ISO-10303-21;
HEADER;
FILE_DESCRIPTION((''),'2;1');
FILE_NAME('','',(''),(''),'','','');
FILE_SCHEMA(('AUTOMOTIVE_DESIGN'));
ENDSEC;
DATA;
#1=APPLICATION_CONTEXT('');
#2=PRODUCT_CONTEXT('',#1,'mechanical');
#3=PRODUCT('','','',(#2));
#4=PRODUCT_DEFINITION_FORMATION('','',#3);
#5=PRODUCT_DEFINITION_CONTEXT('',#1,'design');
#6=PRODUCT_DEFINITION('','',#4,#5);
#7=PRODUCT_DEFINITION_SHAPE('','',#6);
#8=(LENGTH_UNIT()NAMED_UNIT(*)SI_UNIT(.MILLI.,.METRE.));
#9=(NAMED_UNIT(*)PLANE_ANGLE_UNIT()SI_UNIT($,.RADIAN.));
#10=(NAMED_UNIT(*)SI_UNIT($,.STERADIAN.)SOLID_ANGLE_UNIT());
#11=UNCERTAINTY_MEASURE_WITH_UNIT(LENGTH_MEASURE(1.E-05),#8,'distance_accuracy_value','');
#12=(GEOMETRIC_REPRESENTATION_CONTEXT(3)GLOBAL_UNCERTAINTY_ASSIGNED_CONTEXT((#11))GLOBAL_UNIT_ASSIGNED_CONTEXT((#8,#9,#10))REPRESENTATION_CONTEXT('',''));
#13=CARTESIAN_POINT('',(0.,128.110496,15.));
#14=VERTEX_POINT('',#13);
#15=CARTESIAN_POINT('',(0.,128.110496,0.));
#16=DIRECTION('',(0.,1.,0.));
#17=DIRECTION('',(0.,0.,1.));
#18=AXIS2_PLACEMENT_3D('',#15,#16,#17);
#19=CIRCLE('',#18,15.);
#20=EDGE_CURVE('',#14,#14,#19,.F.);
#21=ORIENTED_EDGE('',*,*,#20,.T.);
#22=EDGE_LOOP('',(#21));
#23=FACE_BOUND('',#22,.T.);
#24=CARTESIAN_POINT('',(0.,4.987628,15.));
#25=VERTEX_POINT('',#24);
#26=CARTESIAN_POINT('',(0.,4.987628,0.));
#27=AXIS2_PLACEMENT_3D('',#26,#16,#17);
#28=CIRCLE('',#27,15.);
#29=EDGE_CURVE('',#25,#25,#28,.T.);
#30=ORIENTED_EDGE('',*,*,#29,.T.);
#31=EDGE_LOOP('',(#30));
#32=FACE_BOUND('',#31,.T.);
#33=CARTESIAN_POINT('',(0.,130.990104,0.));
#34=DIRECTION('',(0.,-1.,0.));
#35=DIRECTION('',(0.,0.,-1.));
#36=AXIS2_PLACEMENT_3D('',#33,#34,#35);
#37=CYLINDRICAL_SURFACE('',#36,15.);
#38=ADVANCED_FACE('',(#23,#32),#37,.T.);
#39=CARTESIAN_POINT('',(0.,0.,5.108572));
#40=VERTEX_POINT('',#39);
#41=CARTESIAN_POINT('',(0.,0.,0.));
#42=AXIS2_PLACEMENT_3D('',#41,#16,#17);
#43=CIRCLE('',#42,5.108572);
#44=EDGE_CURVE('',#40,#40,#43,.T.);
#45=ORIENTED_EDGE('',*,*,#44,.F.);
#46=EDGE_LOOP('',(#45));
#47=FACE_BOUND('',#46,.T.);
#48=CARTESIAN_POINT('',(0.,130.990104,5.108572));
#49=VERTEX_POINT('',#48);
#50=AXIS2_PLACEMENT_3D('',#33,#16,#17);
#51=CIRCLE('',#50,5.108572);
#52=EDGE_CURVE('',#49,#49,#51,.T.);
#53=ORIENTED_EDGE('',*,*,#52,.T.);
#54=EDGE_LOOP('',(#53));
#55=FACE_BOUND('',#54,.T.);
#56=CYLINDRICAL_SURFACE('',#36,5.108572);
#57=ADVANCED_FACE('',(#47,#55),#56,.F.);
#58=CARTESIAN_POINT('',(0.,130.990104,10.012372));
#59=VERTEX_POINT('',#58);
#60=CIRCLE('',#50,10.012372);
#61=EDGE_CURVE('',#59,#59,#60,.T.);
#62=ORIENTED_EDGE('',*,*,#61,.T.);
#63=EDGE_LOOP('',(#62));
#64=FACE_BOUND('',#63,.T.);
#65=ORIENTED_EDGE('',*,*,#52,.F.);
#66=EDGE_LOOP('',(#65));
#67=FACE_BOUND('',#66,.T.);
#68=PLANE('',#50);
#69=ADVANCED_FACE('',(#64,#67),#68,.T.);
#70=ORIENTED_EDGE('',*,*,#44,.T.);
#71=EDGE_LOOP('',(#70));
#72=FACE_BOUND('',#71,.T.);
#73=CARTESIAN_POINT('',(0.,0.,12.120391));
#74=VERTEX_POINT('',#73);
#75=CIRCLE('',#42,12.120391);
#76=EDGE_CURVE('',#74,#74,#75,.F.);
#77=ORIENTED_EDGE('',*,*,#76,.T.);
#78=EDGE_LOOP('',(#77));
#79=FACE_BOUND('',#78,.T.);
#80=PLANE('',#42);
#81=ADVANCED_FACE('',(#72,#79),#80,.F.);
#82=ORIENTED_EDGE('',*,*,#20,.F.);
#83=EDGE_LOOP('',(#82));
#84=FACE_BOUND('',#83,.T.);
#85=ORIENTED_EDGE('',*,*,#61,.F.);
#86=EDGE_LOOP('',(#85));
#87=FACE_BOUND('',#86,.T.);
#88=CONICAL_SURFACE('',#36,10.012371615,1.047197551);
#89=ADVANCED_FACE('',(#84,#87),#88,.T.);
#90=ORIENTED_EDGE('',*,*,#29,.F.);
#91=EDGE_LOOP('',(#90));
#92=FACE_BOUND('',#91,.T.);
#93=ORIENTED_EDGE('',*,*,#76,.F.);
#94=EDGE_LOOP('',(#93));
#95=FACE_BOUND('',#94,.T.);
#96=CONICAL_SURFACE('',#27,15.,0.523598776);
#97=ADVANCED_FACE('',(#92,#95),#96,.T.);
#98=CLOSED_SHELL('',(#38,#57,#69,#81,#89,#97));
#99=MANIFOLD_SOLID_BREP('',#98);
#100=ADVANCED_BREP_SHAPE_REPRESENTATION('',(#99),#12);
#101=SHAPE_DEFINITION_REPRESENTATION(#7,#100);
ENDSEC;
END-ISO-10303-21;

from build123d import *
from OCP.BRepFilletAPI import BRepFilletAPI_MakeChamfer

# Parameters (mm, degrees)
SKETCH1_R           = 15
BOSS_EXTRUDE1_DEPTH = 130.990104397
SKETCH2_R           = 5.108572349
CUT_EXTRUDE1_DEPTH  = 133.6966746
CHAMFER1_SIZE       = 2.87960859
CHAMFER1_SIZE2      = 4.987628385


with BuildPart() as part:
    # Sketch1 → Boss-Extrude1 (new body)
    with BuildSketch(Plane(origin=(0, 0, 0), x_dir=(1, 0, 0), z_dir=(0, 1, 0))):
        Circle(SKETCH1_R)
    extrude(amount=BOSS_EXTRUDE1_DEPTH)

    # Sketch2 → Cut-Extrude1 (cut, through all)
    with BuildSketch(Plane(origin=(0, 0, 0), x_dir=(1, 0, 0), z_dir=(0, 1, 0))):
        Circle(SKETCH2_R)
    extrude(amount=CUT_EXTRUDE1_DEPTH, mode=Mode.SUBTRACT)

    # Chamfer1: one chamfer whose edges measure the first distance from different faces: ONE call of the kernel's chamfer builder (chamfer() names one face for all edges)
    chamfer1_edges_1 = [part.edges().sort_by_distance(p)[0] for p in [
        (-15, 130.990104397, 0),
    ]]
    chamfer1_side_1 = [part.faces().sort_by_distance(p)[0] for p in [
        (-15, 65.495052199, 0),
    ]]
    chamfer1_edges_2 = [part.edges().sort_by_distance(p)[0] for p in [
        (-15, 0, 0),
    ]]
    chamfer1_side_2 = [part.faces().sort_by_distance(p)[0] for p in [
        (-14.575735931, 0, 0),
    ]]
    chamfer1 = BRepFilletAPI_MakeChamfer(part.part.solid().wrapped)
    for e in chamfer1_edges_1:
        chamfer1.Add(CHAMFER1_SIZE, CHAMFER1_SIZE2, e.wrapped, chamfer1_side_1[0].wrapped)  # the first distance lies on this face
    for e in chamfer1_edges_2:
        chamfer1.Add(CHAMFER1_SIZE, CHAMFER1_SIZE2, e.wrapped, chamfer1_side_2[0].wrapped)  # the first distance lies on this face
    add(Compound.cast(chamfer1.Shape()), mode=Mode.REPLACE)


solid = part.part
